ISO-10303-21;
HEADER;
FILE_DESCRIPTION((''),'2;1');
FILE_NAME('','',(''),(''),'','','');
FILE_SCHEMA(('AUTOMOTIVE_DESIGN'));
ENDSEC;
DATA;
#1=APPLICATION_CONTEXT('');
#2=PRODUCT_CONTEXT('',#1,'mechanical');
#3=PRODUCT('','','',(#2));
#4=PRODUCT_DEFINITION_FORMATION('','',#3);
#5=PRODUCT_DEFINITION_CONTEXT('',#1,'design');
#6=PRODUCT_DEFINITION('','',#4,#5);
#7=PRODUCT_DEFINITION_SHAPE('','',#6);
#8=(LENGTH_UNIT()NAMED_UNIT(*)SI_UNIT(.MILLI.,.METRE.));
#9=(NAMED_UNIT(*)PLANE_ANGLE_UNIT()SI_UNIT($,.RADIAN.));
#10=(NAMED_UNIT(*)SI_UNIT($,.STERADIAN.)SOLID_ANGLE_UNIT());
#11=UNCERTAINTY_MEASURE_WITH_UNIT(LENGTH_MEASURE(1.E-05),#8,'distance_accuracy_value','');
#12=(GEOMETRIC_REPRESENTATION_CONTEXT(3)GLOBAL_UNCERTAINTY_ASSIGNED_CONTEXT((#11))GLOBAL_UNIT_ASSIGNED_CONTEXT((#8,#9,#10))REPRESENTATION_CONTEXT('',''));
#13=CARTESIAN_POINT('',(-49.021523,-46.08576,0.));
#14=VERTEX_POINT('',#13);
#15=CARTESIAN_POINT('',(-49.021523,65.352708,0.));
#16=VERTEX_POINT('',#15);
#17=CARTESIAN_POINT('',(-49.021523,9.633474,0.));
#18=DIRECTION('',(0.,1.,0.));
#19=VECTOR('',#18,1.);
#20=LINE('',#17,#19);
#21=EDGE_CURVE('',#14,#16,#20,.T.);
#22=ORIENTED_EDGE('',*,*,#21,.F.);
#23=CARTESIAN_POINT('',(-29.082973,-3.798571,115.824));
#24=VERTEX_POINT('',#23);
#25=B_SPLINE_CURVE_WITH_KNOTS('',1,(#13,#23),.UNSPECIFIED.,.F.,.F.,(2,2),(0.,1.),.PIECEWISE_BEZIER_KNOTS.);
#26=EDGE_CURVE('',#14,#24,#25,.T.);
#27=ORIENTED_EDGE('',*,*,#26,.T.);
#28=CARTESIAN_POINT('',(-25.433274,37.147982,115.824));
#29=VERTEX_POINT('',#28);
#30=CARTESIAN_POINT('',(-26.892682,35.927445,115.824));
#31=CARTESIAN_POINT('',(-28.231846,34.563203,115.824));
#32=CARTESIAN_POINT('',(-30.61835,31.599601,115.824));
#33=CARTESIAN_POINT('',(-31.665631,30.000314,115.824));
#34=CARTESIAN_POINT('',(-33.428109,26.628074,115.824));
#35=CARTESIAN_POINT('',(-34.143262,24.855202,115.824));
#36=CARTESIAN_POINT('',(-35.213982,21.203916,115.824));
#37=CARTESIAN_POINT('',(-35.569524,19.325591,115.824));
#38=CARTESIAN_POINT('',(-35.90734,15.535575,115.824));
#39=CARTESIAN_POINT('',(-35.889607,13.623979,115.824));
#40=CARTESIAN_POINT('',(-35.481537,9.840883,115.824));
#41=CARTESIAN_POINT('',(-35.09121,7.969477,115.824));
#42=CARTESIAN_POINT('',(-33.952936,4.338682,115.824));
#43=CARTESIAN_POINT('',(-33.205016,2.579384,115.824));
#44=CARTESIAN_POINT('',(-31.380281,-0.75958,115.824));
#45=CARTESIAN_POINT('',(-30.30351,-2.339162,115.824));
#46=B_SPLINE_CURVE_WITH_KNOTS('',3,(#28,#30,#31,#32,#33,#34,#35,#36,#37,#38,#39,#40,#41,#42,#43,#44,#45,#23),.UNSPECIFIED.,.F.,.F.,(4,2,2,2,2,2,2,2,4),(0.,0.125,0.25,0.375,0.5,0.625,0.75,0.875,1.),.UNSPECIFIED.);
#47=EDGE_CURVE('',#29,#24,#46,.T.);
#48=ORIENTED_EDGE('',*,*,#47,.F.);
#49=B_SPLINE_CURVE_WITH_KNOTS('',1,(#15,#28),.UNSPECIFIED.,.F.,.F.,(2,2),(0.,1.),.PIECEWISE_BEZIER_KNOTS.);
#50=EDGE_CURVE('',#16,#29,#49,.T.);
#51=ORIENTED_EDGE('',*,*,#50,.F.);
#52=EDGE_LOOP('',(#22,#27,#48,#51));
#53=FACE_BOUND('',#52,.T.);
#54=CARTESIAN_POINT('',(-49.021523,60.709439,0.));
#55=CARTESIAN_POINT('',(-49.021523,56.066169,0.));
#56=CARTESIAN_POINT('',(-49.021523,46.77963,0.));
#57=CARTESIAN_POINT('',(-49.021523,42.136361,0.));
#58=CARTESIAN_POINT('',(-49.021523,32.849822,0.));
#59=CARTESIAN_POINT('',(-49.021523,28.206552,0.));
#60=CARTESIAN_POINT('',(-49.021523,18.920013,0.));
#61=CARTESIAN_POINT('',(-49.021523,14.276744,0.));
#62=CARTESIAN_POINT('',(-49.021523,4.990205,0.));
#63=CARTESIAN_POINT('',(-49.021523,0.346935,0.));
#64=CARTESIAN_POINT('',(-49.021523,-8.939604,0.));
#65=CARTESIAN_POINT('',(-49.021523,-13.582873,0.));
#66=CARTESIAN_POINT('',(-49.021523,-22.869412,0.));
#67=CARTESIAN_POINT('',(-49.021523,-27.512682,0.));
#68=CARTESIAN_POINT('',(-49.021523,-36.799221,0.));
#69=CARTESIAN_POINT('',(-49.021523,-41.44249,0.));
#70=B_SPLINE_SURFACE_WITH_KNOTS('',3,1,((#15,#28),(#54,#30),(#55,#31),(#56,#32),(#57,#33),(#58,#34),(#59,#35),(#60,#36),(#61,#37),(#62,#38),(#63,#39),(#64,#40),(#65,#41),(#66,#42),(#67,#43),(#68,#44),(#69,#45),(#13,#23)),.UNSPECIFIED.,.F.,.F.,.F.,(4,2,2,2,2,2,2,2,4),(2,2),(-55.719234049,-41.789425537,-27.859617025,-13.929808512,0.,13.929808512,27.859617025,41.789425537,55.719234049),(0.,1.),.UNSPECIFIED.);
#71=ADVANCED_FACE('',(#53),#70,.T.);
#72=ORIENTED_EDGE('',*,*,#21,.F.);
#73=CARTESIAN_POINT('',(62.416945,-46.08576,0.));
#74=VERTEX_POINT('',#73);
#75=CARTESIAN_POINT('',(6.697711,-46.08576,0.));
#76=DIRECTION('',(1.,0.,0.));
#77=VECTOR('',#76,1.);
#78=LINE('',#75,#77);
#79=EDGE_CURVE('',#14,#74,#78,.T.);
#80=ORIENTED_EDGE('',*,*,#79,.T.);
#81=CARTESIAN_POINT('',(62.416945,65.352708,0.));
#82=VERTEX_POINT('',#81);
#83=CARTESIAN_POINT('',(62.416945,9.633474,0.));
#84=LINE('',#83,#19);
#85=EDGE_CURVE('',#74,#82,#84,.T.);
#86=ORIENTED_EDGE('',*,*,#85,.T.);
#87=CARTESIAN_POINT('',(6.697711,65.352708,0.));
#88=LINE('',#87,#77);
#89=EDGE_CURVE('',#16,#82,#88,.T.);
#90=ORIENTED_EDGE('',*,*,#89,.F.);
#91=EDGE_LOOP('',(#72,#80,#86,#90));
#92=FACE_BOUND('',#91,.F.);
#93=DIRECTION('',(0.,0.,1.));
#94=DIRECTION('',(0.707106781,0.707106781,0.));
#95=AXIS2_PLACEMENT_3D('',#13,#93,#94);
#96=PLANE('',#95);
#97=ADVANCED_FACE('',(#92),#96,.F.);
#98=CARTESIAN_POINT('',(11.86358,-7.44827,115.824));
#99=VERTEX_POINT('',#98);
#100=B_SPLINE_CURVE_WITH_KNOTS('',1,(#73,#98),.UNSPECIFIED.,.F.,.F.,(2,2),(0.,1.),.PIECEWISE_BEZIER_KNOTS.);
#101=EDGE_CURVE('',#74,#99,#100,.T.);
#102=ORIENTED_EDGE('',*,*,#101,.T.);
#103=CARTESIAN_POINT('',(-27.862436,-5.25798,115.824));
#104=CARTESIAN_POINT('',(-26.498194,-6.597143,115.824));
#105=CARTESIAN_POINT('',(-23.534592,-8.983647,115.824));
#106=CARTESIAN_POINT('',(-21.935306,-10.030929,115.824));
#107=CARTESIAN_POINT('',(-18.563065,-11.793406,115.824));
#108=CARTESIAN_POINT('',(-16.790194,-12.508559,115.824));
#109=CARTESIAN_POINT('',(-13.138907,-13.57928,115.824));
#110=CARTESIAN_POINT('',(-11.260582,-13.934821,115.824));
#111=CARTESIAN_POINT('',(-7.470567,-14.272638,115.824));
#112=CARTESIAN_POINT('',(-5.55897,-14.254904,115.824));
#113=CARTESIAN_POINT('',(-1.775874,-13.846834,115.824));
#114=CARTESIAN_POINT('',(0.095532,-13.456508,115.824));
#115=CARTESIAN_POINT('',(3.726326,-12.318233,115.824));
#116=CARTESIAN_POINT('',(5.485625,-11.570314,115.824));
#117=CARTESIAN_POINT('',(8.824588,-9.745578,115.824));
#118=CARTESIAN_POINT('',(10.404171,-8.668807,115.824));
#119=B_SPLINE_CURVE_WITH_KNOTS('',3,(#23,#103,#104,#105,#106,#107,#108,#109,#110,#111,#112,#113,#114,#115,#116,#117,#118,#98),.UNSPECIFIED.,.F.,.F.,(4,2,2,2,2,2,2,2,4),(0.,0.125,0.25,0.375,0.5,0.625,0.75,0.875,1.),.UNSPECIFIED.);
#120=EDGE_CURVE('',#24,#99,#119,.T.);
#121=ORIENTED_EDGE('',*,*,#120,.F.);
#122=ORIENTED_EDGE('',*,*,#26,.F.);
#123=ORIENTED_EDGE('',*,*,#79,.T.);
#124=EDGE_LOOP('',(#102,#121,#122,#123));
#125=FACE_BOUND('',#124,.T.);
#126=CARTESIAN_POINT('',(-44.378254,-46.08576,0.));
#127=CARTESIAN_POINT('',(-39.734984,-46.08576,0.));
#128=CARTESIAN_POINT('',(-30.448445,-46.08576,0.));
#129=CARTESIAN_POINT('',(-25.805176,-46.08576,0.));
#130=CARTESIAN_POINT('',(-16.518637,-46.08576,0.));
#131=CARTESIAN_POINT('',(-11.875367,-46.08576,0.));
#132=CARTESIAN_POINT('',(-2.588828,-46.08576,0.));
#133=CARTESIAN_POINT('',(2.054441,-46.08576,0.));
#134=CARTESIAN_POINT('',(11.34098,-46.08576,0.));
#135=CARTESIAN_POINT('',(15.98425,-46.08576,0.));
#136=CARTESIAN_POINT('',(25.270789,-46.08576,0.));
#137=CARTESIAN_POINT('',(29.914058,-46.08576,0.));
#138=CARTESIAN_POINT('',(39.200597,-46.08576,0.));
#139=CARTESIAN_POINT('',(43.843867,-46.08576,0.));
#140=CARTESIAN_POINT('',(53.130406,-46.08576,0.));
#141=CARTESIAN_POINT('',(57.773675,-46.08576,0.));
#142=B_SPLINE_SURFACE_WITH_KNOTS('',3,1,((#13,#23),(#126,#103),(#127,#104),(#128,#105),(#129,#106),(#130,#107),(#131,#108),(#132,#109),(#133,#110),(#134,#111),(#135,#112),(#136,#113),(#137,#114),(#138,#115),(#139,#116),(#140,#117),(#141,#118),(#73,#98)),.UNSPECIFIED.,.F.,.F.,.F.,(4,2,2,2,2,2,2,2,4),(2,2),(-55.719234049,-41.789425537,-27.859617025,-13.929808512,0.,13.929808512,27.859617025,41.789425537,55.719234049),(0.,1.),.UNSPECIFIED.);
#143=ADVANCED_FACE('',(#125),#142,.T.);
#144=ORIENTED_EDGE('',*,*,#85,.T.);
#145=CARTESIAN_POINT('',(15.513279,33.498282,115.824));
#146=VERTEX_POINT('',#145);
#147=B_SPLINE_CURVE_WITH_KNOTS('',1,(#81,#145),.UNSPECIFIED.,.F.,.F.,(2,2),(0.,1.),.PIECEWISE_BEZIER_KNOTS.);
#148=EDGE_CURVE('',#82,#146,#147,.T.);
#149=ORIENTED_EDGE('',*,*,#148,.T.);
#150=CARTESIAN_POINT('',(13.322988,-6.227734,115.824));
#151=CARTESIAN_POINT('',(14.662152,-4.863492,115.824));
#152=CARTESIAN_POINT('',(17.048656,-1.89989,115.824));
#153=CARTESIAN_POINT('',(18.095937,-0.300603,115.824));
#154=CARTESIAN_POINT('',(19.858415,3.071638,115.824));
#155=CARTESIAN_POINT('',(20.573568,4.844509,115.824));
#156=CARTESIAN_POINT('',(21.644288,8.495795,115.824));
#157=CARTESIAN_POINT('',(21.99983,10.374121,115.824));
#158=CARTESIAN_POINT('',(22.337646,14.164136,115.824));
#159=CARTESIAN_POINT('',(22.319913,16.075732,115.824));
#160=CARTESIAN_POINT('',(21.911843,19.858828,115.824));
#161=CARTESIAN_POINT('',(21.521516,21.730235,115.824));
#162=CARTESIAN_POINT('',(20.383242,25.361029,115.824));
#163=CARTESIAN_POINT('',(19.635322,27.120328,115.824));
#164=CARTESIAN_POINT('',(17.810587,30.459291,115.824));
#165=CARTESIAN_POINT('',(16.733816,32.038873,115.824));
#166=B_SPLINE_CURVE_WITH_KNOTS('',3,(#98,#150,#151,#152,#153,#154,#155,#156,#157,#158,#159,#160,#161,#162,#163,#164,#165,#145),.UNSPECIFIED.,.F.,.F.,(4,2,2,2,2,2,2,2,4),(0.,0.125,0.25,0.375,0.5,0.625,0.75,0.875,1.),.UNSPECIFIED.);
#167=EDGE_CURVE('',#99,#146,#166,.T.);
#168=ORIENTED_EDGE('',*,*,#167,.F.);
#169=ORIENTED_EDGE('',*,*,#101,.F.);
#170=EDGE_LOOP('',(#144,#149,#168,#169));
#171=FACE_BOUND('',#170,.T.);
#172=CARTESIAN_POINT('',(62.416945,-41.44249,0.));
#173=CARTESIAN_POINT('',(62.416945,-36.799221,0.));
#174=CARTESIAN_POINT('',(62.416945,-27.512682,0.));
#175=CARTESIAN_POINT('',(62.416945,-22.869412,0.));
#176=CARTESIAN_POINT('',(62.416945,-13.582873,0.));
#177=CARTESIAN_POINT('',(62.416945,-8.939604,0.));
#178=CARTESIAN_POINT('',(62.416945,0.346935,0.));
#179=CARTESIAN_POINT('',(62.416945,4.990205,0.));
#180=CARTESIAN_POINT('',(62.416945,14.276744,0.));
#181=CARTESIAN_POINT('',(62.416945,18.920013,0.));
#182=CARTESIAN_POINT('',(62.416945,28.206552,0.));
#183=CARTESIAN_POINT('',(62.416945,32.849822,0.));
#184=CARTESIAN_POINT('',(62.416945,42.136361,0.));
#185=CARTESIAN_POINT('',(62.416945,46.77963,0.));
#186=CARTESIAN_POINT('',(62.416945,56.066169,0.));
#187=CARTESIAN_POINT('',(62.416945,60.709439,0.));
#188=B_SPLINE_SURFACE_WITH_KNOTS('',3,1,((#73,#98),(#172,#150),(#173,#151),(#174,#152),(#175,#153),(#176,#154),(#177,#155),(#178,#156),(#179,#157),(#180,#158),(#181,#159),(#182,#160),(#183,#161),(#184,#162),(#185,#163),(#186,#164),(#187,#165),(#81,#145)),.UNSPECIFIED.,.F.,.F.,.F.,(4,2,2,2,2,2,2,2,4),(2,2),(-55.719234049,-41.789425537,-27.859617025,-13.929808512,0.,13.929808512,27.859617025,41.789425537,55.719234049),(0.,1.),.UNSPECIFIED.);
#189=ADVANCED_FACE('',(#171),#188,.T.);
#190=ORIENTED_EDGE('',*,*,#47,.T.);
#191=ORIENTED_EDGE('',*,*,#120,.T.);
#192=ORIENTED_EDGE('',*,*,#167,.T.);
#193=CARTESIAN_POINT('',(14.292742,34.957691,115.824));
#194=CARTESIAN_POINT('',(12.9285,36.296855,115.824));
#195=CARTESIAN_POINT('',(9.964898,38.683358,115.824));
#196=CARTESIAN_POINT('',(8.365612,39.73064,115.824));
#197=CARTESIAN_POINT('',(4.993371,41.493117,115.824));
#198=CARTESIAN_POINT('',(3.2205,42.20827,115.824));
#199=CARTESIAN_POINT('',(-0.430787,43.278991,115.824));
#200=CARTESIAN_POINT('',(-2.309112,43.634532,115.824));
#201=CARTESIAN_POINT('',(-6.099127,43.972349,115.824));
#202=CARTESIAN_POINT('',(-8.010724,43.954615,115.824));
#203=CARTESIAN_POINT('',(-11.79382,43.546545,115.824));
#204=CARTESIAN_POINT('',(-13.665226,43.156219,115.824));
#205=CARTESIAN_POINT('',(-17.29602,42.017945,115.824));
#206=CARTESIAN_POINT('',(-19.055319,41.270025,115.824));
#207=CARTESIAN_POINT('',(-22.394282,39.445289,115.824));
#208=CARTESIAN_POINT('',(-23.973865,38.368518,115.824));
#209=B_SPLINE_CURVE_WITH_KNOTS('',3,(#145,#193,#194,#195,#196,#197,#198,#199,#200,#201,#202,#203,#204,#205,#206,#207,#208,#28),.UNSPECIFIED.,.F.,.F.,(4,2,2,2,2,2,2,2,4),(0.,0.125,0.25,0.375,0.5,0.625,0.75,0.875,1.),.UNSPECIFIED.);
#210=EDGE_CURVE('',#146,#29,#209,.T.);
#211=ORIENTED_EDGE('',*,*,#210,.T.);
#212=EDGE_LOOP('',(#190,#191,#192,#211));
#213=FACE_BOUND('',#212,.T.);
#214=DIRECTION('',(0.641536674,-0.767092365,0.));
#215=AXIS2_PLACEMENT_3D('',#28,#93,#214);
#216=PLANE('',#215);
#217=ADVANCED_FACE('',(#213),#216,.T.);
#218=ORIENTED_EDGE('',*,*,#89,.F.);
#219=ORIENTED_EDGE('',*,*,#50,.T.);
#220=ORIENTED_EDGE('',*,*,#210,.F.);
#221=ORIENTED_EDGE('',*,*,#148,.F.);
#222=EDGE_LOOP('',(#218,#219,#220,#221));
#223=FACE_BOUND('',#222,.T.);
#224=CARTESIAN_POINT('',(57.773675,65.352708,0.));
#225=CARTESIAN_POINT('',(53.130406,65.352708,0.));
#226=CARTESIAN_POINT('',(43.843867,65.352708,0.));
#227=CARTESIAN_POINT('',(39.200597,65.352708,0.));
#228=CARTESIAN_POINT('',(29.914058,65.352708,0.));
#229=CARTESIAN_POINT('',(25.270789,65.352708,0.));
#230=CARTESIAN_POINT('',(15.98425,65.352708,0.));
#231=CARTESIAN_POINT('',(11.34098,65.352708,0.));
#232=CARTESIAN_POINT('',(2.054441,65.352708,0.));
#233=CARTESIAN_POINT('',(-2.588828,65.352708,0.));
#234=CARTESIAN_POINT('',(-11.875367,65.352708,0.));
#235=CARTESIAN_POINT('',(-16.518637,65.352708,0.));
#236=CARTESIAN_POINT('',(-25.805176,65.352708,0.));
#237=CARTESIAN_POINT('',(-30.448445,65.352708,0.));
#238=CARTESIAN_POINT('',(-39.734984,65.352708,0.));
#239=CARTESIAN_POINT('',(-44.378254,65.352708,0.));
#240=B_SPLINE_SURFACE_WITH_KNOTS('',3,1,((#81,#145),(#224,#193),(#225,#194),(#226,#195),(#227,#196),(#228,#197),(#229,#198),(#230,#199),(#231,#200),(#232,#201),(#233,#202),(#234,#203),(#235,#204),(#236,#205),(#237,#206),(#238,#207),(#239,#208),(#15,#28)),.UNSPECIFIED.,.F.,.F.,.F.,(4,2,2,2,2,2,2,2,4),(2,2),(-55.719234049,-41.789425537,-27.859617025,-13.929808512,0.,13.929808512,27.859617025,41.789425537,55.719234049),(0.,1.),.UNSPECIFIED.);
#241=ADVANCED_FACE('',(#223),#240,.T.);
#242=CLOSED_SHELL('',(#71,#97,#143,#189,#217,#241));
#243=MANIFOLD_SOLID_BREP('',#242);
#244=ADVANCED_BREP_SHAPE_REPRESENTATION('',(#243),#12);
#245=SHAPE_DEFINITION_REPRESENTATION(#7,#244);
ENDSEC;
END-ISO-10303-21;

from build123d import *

# Parameters (mm, degrees)
F0_W = 111.4384680986
F0_H = 111.4384680986


# Not quite as in the source:
# - the arcs of a loft's sections are written as splines that run evenly, so that the points pair up as in the source's solid


with BuildPart() as f3:
    # F0 (on Top) → F3 section 0
    with BuildSketch(Plane.XY):
        with Locations((6.6977106035, 9.633474052)):
            Rectangle(F0_W, F0_H)
    # F2 (on offset) → F3 section 1
    with BuildSketch(Plane.XY.offset(115.824)):
        with BuildLine():
            add(Edge.make_bspline(
                [(-25.4332735487, 37.1479816271), (-26.8926824867, 35.9274449641), (-28.2318459417, 34.563202801), (-30.6183497695, 31.599600895), (-31.6656311314, 30.000314433), (-33.4281089071, 26.6280735063), (-34.1432617404, 24.855202427), (-35.2139824316, 21.2039158074), (-35.5695238139, 19.3255905523), (-35.9073402249, 15.5355751367), (-35.8896069004, 13.6239786919), (-35.4815369359, 9.8408826475), (-35.0912103863, 7.9694765923), (-33.9529359462, 4.3386821784), (-33.2050162019, 2.5793835981), (-31.3802805346, -0.7595797922), (-30.3035097318, -2.3391620399), (-29.0829730688, -3.7985709779)],
                knots=[0, 0, 0, 0, 0.125, 0.125, 0.25, 0.25, 0.375, 0.375, 0.5, 0.5, 0.625, 0.625, 0.75, 0.75, 0.875, 0.875, 1, 1, 1, 1], degree=3))
            add(Edge.make_bspline(
                [(-29.0829730688, -3.7985709779), (-27.8624364057, -5.257979916), (-26.4981942427, -6.597143371), (-23.5345923367, -8.9836471988), (-21.9353058746, -10.0309285606), (-18.563064948, -11.7934063364), (-16.7901938687, -12.5085591696), (-13.1389072491, -13.5792798609), (-11.2605819939, -13.9348212432), (-7.4705665784, -14.2726376542), (-5.5589701336, -14.2549043297), (-1.7758740892, -13.8468343652), (0.095531966, -13.4565078155), (3.72632638, -12.3182333755), (5.4856249602, -11.5703136311), (8.8245883506, -9.7455779638), (10.4041705982, -8.6688071611), (11.8635795362, -7.448270498)],
                knots=[0, 0, 0, 0, 0.125, 0.125, 0.25, 0.25, 0.375, 0.375, 0.5, 0.5, 0.625, 0.625, 0.75, 0.75, 0.875, 0.875, 1, 1, 1, 1], degree=3))
            add(Edge.make_bspline(
                [(11.8635795362, -7.448270498), (13.3229884743, -6.227733835), (14.6621519293, -4.863491672), (17.0486557571, -1.899889766), (18.095937119, -0.3006033039), (19.8584148947, 3.0716376228), (20.573567728, 4.844508702), (21.6442884192, 8.4957953217), (21.9998298015, 10.3741205768), (22.3376462125, 14.1641359923), (22.319912888, 16.0757324371), (21.9118429235, 19.8588284816), (21.5215163739, 21.7302345367), (20.3832419338, 25.3610289507), (19.6353221895, 27.120327531), (17.8105865222, 30.4592909213), (16.7338157194, 32.0388731689), (15.5132790564, 33.498282107)],
                knots=[0, 0, 0, 0, 0.125, 0.125, 0.25, 0.25, 0.375, 0.375, 0.5, 0.5, 0.625, 0.625, 0.75, 0.75, 0.875, 0.875, 1, 1, 1, 1], degree=3))
            add(Edge.make_bspline(
                [(15.5132790564, 33.498282107), (14.2927423933, 34.957691045), (12.9285002303, 36.2968545), (9.9648983243, 38.6833583279), (8.3656118622, 39.7306396897), (4.9933709356, 41.4931174655), (3.2204998563, 42.2082702987), (-0.4307867633, 43.2789909899), (-2.3091120185, 43.6345323723), (-6.099127434, 43.9723487833), (-8.0107238788, 43.9546154587), (-11.7938199232, 43.5465454943), (-13.6652259784, 43.1562189446), (-17.2960203924, 42.0179445045), (-19.0553189726, 41.2700247602), (-22.394282363, 39.4452890929), (-23.9738646106, 38.3685182902), (-25.4332735487, 37.1479816271)],
                knots=[0, 0, 0, 0, 0.125, 0.125, 0.25, 0.25, 0.375, 0.375, 0.5, 0.5, 0.625, 0.625, 0.75, 0.75, 0.875, 0.875, 1, 1, 1, 1], degree=3))
        make_face()
    loft(ruled=True)


solid = f3.part
